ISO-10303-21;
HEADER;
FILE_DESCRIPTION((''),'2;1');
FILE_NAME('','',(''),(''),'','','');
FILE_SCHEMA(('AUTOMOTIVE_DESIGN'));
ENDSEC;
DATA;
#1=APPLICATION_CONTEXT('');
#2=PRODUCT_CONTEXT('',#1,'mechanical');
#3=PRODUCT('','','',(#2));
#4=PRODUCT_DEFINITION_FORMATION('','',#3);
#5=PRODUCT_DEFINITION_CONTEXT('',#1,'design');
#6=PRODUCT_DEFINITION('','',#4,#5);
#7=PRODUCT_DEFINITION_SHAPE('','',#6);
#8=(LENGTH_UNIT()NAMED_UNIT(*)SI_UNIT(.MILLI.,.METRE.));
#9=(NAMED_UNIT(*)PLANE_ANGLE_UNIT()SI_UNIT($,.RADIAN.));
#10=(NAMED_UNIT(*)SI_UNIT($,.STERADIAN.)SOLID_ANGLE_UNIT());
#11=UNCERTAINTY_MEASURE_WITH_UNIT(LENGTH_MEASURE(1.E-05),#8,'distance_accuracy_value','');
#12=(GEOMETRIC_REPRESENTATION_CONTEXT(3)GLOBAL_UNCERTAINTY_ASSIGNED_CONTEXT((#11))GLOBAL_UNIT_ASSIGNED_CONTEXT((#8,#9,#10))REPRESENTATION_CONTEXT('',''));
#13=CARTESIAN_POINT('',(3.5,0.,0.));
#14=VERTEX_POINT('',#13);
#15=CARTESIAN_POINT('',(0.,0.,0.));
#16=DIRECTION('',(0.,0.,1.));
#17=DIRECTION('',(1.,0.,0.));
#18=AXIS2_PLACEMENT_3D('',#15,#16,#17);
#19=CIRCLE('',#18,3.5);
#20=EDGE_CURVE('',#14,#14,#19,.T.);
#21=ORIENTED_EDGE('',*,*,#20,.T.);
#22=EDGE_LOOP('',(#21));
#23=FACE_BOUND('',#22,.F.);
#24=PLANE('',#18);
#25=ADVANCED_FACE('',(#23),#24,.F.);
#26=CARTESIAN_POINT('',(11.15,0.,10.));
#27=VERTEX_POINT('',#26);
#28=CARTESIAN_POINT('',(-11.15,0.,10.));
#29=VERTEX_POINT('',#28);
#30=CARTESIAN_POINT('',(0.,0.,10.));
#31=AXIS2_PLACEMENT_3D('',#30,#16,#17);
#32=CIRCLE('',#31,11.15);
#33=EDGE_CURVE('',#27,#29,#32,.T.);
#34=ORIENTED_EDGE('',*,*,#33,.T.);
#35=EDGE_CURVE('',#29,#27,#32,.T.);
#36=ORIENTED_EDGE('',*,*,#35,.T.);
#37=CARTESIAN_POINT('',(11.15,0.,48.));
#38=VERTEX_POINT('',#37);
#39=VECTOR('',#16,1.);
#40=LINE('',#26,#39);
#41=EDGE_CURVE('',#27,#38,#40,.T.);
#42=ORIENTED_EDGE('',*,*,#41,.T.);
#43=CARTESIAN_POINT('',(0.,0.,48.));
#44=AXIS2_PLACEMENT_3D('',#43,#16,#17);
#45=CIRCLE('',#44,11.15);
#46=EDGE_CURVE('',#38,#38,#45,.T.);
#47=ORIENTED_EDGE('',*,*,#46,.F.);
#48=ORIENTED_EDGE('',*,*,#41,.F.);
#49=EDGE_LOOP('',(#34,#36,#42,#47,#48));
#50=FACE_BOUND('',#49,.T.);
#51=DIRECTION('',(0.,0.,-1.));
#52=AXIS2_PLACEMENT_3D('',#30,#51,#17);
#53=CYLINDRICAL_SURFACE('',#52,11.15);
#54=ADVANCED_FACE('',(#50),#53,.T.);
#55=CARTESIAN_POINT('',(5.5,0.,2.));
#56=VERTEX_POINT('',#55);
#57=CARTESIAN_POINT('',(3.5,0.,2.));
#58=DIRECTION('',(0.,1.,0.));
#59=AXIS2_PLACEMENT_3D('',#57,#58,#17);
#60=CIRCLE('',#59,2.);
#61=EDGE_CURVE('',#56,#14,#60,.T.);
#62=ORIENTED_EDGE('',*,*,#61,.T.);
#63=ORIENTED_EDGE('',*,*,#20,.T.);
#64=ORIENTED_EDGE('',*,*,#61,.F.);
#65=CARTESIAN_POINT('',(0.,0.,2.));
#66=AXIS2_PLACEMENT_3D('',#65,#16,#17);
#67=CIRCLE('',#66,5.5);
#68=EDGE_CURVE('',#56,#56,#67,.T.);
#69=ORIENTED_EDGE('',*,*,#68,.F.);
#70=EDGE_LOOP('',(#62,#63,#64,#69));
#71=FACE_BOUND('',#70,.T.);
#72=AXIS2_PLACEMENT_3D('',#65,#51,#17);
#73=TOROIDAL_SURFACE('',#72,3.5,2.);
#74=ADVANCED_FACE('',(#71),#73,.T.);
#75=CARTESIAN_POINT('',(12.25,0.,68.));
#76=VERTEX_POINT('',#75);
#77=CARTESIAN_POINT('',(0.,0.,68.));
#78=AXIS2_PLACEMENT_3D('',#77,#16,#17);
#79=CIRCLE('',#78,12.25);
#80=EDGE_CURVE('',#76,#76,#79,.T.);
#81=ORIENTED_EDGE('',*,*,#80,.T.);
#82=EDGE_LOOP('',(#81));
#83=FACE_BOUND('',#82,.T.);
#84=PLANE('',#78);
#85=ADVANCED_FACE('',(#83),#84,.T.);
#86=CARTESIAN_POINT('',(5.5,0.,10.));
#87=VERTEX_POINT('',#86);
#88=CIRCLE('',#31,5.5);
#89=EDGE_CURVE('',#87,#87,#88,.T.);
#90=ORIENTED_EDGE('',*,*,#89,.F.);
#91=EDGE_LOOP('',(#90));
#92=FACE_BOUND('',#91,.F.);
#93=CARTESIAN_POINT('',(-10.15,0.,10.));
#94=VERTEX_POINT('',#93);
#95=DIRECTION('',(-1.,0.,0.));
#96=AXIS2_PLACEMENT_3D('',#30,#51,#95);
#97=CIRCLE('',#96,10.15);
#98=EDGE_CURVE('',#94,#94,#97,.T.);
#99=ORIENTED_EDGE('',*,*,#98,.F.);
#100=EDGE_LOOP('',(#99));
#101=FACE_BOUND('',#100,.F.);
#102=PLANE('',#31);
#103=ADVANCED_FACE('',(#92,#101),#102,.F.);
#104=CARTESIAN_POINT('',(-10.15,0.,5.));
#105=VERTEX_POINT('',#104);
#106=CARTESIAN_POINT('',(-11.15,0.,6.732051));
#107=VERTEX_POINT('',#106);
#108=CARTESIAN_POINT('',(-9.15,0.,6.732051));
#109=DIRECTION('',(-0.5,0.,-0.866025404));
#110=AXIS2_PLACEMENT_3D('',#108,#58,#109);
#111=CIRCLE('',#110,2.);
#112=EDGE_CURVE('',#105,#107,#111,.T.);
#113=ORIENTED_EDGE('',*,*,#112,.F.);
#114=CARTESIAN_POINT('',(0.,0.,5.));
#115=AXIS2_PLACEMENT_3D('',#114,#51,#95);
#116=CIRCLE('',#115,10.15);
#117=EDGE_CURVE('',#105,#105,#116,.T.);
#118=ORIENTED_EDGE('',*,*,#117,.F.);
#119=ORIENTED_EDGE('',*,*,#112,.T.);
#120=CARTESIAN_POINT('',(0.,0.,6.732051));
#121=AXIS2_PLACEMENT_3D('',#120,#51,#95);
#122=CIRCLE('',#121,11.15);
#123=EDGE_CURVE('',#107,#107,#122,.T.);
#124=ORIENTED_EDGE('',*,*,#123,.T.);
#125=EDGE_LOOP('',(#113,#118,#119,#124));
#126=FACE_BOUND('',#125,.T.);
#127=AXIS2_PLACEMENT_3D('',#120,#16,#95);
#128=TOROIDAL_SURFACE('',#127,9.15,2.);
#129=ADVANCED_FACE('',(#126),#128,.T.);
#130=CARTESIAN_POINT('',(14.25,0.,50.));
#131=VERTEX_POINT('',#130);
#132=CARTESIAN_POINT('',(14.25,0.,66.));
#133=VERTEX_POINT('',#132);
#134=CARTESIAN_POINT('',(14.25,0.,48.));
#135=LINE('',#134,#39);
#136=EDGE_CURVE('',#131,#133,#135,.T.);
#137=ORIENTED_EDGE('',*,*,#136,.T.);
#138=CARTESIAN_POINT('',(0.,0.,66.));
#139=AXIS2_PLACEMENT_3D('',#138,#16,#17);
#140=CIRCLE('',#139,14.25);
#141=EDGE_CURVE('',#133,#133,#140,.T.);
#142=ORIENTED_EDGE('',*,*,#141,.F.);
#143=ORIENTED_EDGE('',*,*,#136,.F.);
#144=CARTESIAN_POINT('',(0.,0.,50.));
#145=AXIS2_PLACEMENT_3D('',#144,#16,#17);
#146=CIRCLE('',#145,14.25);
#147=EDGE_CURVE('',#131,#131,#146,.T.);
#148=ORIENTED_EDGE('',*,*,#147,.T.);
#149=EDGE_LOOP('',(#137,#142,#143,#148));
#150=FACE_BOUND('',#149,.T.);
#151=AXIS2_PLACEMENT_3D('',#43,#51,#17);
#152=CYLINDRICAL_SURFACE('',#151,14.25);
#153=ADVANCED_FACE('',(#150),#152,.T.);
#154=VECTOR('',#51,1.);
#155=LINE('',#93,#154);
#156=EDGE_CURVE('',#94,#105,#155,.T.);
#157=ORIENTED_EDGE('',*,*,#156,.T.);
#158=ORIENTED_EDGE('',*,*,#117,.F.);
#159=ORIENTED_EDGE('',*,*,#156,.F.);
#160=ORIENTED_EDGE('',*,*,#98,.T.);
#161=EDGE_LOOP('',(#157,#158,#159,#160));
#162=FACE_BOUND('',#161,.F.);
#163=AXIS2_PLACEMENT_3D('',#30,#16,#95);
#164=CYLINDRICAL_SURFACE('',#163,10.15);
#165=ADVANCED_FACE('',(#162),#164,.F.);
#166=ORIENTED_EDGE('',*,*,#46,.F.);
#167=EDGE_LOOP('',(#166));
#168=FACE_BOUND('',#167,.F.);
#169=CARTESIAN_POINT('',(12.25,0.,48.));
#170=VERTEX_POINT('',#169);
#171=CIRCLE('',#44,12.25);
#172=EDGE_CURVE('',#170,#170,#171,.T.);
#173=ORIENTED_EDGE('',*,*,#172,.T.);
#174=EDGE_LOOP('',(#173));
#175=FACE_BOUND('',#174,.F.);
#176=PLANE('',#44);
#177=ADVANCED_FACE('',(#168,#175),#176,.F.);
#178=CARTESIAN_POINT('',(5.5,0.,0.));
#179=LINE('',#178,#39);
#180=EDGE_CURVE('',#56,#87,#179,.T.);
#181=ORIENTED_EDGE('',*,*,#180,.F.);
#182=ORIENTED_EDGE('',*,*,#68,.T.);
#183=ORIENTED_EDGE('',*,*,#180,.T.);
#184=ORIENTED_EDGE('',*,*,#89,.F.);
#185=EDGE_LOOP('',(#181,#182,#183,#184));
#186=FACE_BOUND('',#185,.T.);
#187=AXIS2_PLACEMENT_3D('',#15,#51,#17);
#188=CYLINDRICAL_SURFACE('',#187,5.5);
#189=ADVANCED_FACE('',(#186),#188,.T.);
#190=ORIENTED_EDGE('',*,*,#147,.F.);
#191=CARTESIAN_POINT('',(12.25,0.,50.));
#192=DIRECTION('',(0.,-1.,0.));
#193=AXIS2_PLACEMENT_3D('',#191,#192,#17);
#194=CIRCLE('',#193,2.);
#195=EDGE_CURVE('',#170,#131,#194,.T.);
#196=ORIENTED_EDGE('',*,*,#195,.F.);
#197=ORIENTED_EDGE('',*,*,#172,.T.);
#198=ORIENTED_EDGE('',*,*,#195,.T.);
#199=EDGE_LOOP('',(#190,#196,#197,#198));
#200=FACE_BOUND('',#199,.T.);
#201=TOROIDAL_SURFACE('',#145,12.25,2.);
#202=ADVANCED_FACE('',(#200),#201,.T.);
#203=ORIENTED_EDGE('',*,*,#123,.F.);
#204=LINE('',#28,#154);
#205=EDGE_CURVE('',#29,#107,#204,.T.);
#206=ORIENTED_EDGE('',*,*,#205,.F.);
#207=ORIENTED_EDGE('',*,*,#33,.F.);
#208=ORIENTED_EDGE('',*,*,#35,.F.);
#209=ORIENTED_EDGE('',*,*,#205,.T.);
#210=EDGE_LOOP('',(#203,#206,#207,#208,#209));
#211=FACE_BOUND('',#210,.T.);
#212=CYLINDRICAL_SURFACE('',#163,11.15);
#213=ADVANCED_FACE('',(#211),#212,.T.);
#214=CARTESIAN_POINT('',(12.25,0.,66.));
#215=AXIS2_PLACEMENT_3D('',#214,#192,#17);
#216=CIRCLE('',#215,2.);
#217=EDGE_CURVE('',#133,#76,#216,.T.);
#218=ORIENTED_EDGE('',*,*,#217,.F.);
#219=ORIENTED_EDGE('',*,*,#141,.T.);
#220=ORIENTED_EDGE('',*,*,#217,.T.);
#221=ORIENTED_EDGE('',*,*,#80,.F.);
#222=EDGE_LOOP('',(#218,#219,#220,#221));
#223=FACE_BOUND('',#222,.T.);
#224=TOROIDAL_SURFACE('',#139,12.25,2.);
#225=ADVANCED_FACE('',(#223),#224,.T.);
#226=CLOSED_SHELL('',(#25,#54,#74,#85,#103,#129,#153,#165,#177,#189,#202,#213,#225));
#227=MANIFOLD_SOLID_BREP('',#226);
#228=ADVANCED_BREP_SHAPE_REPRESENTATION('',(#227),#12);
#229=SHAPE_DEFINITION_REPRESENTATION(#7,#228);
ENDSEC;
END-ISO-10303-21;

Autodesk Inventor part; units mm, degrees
ref_plane "YZ Plane" through (0, 0, 0) normal (1, 0, 0) x (0, 1, 0)
ref_plane "XZ Plane" through (0, 0, 0) normal (0, 1, 0) x (-1, 0, 0)
ref_plane "XY Plane" through (0, 0, 0) normal (0, 0, 1) x (1, 0, 0)
sketch "Sketch1" plane through (0, 0, 0) normal (0, 0, 1) x (1, 0, 0)
  circle A0 centre (0, 0) radius 5.5
  dimension "d0" = 11
extrude "Extrusion1" add sketch "Sketch1" along normal blind 10
sketch "Sketch2" plane through (0, 0, 10) normal (0, 0, 1) x (1, 0, 0)
  circle A0 centre (0, 0) radius 11.15
  dimension "d3" = 22.3
extrude "Extrusion3" add sketch "Sketch2" along normal blind 38
sketch "Sketch3" plane through (0, 0, 10) normal (0, 0, -1) x (-1, 0, 0)
  circle A0 centre (0, 0) radius 10.15
  circle A1 centre (0, 0) radius 11.15
  dimension "d8" = 20.3
  dimension "d9" = 22.3
extrude "Extrusion4" add sketch "Sketch3" along normal blind 5
sketch "Sketch4" plane through (0, 0, 48) normal (0, 0, 1) x (1, 0, 0)
  circle A0 centre (0, 0) radius 14.25
  dimension "d12" = 28.5
extrude "Extrusion5" add sketch "Sketch4" along normal blind 20
fillet "Fillet1" radius 2 1 edges at (-14.25, 0, 68)
fillet "Fillet2" radius 2 1 edges at (-5.5, 0, 0)
fillet "Fillet3" radius 2 1 edges at (11.15, 0, 5)
fillet "Fillet4" radius 2 1 edges at (-14.25, 0, 48)
properties part number "Elbow_Parallel_Rod_V1"
